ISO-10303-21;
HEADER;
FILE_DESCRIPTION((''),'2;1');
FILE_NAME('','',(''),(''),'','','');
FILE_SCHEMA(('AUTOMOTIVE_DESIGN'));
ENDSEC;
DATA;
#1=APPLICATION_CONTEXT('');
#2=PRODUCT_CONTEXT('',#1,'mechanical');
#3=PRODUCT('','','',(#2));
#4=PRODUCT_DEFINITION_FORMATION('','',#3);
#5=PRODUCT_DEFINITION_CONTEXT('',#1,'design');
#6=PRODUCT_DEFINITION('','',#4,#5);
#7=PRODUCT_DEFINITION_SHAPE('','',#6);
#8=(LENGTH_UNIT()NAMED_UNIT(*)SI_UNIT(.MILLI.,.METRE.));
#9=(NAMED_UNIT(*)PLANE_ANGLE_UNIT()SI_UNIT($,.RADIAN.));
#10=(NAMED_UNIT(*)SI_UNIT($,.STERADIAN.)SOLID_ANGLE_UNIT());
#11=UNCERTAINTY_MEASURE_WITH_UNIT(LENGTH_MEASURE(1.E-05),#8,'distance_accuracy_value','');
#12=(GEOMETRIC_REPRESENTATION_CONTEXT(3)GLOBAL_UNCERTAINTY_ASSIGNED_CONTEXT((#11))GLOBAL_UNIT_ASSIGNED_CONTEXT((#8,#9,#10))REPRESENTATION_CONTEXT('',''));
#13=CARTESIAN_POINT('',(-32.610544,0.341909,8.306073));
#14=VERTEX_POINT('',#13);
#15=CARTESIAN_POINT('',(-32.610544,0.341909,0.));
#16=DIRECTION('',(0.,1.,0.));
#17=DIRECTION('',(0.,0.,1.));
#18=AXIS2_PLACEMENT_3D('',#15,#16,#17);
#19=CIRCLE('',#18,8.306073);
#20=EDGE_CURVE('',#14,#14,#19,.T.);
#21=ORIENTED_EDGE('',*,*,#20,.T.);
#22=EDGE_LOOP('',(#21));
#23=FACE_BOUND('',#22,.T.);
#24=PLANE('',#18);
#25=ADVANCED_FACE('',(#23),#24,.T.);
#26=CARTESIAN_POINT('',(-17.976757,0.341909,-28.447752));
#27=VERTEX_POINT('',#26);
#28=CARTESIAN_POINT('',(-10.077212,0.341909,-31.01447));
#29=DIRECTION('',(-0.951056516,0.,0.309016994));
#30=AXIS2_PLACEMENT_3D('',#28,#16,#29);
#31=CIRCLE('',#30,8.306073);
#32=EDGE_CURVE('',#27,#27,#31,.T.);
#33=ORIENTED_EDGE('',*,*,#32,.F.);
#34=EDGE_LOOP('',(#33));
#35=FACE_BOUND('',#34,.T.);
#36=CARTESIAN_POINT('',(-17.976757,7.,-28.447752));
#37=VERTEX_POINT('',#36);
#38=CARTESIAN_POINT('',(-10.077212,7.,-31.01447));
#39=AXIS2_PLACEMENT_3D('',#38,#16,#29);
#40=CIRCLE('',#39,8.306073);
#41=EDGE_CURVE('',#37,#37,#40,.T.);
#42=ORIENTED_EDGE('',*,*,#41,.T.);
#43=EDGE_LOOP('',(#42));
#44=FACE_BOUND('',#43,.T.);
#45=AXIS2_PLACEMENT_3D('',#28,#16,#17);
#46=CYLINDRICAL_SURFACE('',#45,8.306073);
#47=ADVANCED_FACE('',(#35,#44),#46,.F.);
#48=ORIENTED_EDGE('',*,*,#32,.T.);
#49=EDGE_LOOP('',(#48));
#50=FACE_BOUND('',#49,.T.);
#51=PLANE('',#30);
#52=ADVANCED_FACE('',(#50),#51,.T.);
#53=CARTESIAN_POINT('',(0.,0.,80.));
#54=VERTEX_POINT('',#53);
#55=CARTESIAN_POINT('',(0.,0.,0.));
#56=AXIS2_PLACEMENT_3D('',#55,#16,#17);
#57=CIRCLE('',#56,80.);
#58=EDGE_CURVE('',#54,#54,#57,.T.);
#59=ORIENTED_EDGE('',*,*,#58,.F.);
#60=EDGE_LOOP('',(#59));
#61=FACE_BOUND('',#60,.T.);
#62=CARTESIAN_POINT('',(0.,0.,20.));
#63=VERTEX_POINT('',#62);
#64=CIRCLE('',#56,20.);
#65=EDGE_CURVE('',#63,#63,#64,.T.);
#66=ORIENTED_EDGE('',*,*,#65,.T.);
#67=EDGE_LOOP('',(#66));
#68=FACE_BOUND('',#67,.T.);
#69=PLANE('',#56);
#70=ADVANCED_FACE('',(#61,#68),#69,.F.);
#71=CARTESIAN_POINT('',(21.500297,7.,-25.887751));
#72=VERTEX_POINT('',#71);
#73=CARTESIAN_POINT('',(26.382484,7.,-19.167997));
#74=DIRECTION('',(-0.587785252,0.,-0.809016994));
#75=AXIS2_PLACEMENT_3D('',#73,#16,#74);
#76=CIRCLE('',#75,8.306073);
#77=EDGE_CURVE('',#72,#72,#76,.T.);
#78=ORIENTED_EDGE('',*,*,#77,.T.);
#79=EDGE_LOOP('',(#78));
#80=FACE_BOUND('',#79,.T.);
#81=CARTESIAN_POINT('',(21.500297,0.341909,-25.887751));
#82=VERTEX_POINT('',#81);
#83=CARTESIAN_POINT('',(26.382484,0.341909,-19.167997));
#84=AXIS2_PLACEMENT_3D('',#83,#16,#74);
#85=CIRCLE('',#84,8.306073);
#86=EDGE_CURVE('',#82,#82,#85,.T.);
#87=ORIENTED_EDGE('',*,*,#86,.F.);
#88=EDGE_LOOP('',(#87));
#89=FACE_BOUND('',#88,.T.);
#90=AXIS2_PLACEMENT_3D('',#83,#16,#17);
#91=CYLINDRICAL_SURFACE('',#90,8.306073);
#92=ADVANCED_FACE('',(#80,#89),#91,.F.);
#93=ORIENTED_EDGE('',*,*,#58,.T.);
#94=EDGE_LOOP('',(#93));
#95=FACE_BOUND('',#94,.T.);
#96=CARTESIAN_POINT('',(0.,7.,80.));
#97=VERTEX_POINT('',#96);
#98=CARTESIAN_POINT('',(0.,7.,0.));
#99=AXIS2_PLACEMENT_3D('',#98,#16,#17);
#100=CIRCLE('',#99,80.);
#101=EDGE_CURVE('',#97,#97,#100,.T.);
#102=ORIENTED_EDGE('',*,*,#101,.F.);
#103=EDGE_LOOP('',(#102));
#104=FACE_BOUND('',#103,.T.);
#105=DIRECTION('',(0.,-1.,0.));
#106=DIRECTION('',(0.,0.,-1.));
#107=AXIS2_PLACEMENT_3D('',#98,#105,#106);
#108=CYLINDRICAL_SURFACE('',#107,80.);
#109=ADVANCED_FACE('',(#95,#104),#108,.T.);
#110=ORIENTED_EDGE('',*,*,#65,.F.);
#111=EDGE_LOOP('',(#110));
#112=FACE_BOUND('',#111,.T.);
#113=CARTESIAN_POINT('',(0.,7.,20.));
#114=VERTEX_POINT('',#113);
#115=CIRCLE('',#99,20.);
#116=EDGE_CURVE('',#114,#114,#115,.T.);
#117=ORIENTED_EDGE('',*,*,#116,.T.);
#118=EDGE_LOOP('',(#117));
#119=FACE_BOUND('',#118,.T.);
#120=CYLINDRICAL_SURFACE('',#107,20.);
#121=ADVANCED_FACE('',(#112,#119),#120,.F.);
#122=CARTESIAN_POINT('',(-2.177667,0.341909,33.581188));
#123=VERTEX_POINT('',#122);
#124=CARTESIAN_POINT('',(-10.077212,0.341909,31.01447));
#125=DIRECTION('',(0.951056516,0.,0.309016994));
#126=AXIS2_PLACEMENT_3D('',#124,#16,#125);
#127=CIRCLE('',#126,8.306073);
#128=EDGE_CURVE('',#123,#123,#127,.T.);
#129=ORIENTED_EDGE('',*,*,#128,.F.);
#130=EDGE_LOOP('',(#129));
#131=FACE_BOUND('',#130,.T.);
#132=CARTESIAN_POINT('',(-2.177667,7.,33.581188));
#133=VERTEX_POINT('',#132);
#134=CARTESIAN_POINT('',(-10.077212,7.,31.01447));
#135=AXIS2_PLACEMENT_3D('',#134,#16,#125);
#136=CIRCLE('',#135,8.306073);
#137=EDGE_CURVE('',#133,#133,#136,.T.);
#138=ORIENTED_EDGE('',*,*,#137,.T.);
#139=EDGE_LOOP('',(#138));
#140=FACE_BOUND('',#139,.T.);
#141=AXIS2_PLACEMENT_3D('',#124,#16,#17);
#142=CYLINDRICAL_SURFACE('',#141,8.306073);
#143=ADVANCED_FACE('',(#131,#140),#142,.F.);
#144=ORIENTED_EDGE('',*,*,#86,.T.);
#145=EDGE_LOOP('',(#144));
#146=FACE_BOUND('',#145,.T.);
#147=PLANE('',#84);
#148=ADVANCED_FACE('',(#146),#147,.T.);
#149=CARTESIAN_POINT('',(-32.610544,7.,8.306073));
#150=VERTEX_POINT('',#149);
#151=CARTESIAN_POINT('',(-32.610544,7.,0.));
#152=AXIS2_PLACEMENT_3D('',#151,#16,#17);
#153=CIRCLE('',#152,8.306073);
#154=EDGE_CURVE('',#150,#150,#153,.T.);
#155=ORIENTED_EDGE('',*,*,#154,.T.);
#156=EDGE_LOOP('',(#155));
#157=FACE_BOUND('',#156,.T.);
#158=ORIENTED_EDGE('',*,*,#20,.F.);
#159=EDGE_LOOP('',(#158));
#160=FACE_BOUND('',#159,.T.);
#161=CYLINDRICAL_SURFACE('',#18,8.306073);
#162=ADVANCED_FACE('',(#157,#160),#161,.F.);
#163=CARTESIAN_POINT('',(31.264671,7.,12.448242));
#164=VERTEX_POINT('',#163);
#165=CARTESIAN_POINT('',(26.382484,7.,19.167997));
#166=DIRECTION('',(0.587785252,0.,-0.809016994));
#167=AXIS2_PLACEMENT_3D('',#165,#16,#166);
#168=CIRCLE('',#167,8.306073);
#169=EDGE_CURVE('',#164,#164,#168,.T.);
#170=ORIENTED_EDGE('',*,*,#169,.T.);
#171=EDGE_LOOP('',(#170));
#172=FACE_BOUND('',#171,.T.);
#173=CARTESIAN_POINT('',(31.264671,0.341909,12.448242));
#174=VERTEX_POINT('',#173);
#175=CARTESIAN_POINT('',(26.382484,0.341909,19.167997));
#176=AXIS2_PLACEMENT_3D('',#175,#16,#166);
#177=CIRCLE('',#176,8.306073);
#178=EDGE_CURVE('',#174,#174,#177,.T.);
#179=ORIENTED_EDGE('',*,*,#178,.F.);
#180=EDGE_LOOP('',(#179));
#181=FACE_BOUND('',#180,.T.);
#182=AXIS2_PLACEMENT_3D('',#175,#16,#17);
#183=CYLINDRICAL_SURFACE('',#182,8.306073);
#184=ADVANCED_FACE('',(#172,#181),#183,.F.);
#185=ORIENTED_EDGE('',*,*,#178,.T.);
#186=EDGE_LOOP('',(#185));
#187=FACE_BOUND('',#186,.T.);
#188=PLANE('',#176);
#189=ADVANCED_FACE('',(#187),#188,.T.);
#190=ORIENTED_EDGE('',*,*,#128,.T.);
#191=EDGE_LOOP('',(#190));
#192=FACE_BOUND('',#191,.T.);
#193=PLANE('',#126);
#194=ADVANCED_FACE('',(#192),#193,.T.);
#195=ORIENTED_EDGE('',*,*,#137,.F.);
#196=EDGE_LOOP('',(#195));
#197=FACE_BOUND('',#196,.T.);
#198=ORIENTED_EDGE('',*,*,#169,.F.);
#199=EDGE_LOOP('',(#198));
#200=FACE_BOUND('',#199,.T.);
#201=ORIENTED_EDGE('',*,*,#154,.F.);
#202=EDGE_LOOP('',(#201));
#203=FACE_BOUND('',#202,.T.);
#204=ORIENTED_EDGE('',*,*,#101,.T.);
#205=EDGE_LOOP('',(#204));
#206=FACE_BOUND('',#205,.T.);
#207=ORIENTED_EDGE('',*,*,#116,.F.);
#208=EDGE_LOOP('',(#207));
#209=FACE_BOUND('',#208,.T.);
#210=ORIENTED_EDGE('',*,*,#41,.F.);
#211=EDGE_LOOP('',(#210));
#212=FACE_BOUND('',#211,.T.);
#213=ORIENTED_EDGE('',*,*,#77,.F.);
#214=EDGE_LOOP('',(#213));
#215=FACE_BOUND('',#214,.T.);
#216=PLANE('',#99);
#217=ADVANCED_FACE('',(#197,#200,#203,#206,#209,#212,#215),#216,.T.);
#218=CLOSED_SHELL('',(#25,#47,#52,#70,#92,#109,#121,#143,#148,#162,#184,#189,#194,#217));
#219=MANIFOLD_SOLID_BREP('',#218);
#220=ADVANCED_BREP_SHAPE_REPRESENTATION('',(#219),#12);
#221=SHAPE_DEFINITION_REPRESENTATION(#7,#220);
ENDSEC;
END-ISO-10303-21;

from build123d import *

# Parameters (mm, degrees)
SKETCH1_R           = 80
BOSS_EXTRUDE1_DEPTH = 7
SKETCH2_R           = 20
CUT_EXTRUDE1_DEPTH  = 114.353429591
SKETCH3_R           = 8.306073259
CUT_EXTRUDE2_DEPTH  = 6.658091367
CIRPATTERN1_COUNT   = 5


with BuildPart() as part:
    # Sketch1 → Boss-Extrude1 (new body)
    with BuildSketch(Plane(origin=(0, 0, 0), x_dir=(1, 0, 0), z_dir=(0, 1, 0))):
        Circle(SKETCH1_R)
    extrude(amount=BOSS_EXTRUDE1_DEPTH)

    # Sketch2 → Cut-Extrude1 (cut, through all)
    with BuildSketch(Plane(origin=(0, 0, 0), x_dir=(1, 0, 0), z_dir=(0, 1, 0))):
        Circle(SKETCH2_R)
    extrude(amount=CUT_EXTRUDE1_DEPTH, mode=Mode.SUBTRACT)

    # Sketch3 → Cut-Extrude2 (cut)
    with BuildSketch(Plane(origin=(0, 7, 0), x_dir=(1, 0, 0), z_dir=(0, 1, 0))):
        with Locations((-32.610543727, 0)):
            Circle(SKETCH3_R)
    cut_extrude2 = extrude(amount=-CUT_EXTRUDE2_DEPTH, mode=Mode.SUBTRACT)

    # CirPattern1: Cut-Extrude2 ×5 about axis
    cirpattern1_axis = Axis((0, 0, 0), (0, 1, 0))
    for i in range(1, CIRPATTERN1_COUNT):
        add(cut_extrude2.rotate(cirpattern1_axis, i * 360 / CIRPATTERN1_COUNT), mode=Mode.SUBTRACT)


solid = part.part
